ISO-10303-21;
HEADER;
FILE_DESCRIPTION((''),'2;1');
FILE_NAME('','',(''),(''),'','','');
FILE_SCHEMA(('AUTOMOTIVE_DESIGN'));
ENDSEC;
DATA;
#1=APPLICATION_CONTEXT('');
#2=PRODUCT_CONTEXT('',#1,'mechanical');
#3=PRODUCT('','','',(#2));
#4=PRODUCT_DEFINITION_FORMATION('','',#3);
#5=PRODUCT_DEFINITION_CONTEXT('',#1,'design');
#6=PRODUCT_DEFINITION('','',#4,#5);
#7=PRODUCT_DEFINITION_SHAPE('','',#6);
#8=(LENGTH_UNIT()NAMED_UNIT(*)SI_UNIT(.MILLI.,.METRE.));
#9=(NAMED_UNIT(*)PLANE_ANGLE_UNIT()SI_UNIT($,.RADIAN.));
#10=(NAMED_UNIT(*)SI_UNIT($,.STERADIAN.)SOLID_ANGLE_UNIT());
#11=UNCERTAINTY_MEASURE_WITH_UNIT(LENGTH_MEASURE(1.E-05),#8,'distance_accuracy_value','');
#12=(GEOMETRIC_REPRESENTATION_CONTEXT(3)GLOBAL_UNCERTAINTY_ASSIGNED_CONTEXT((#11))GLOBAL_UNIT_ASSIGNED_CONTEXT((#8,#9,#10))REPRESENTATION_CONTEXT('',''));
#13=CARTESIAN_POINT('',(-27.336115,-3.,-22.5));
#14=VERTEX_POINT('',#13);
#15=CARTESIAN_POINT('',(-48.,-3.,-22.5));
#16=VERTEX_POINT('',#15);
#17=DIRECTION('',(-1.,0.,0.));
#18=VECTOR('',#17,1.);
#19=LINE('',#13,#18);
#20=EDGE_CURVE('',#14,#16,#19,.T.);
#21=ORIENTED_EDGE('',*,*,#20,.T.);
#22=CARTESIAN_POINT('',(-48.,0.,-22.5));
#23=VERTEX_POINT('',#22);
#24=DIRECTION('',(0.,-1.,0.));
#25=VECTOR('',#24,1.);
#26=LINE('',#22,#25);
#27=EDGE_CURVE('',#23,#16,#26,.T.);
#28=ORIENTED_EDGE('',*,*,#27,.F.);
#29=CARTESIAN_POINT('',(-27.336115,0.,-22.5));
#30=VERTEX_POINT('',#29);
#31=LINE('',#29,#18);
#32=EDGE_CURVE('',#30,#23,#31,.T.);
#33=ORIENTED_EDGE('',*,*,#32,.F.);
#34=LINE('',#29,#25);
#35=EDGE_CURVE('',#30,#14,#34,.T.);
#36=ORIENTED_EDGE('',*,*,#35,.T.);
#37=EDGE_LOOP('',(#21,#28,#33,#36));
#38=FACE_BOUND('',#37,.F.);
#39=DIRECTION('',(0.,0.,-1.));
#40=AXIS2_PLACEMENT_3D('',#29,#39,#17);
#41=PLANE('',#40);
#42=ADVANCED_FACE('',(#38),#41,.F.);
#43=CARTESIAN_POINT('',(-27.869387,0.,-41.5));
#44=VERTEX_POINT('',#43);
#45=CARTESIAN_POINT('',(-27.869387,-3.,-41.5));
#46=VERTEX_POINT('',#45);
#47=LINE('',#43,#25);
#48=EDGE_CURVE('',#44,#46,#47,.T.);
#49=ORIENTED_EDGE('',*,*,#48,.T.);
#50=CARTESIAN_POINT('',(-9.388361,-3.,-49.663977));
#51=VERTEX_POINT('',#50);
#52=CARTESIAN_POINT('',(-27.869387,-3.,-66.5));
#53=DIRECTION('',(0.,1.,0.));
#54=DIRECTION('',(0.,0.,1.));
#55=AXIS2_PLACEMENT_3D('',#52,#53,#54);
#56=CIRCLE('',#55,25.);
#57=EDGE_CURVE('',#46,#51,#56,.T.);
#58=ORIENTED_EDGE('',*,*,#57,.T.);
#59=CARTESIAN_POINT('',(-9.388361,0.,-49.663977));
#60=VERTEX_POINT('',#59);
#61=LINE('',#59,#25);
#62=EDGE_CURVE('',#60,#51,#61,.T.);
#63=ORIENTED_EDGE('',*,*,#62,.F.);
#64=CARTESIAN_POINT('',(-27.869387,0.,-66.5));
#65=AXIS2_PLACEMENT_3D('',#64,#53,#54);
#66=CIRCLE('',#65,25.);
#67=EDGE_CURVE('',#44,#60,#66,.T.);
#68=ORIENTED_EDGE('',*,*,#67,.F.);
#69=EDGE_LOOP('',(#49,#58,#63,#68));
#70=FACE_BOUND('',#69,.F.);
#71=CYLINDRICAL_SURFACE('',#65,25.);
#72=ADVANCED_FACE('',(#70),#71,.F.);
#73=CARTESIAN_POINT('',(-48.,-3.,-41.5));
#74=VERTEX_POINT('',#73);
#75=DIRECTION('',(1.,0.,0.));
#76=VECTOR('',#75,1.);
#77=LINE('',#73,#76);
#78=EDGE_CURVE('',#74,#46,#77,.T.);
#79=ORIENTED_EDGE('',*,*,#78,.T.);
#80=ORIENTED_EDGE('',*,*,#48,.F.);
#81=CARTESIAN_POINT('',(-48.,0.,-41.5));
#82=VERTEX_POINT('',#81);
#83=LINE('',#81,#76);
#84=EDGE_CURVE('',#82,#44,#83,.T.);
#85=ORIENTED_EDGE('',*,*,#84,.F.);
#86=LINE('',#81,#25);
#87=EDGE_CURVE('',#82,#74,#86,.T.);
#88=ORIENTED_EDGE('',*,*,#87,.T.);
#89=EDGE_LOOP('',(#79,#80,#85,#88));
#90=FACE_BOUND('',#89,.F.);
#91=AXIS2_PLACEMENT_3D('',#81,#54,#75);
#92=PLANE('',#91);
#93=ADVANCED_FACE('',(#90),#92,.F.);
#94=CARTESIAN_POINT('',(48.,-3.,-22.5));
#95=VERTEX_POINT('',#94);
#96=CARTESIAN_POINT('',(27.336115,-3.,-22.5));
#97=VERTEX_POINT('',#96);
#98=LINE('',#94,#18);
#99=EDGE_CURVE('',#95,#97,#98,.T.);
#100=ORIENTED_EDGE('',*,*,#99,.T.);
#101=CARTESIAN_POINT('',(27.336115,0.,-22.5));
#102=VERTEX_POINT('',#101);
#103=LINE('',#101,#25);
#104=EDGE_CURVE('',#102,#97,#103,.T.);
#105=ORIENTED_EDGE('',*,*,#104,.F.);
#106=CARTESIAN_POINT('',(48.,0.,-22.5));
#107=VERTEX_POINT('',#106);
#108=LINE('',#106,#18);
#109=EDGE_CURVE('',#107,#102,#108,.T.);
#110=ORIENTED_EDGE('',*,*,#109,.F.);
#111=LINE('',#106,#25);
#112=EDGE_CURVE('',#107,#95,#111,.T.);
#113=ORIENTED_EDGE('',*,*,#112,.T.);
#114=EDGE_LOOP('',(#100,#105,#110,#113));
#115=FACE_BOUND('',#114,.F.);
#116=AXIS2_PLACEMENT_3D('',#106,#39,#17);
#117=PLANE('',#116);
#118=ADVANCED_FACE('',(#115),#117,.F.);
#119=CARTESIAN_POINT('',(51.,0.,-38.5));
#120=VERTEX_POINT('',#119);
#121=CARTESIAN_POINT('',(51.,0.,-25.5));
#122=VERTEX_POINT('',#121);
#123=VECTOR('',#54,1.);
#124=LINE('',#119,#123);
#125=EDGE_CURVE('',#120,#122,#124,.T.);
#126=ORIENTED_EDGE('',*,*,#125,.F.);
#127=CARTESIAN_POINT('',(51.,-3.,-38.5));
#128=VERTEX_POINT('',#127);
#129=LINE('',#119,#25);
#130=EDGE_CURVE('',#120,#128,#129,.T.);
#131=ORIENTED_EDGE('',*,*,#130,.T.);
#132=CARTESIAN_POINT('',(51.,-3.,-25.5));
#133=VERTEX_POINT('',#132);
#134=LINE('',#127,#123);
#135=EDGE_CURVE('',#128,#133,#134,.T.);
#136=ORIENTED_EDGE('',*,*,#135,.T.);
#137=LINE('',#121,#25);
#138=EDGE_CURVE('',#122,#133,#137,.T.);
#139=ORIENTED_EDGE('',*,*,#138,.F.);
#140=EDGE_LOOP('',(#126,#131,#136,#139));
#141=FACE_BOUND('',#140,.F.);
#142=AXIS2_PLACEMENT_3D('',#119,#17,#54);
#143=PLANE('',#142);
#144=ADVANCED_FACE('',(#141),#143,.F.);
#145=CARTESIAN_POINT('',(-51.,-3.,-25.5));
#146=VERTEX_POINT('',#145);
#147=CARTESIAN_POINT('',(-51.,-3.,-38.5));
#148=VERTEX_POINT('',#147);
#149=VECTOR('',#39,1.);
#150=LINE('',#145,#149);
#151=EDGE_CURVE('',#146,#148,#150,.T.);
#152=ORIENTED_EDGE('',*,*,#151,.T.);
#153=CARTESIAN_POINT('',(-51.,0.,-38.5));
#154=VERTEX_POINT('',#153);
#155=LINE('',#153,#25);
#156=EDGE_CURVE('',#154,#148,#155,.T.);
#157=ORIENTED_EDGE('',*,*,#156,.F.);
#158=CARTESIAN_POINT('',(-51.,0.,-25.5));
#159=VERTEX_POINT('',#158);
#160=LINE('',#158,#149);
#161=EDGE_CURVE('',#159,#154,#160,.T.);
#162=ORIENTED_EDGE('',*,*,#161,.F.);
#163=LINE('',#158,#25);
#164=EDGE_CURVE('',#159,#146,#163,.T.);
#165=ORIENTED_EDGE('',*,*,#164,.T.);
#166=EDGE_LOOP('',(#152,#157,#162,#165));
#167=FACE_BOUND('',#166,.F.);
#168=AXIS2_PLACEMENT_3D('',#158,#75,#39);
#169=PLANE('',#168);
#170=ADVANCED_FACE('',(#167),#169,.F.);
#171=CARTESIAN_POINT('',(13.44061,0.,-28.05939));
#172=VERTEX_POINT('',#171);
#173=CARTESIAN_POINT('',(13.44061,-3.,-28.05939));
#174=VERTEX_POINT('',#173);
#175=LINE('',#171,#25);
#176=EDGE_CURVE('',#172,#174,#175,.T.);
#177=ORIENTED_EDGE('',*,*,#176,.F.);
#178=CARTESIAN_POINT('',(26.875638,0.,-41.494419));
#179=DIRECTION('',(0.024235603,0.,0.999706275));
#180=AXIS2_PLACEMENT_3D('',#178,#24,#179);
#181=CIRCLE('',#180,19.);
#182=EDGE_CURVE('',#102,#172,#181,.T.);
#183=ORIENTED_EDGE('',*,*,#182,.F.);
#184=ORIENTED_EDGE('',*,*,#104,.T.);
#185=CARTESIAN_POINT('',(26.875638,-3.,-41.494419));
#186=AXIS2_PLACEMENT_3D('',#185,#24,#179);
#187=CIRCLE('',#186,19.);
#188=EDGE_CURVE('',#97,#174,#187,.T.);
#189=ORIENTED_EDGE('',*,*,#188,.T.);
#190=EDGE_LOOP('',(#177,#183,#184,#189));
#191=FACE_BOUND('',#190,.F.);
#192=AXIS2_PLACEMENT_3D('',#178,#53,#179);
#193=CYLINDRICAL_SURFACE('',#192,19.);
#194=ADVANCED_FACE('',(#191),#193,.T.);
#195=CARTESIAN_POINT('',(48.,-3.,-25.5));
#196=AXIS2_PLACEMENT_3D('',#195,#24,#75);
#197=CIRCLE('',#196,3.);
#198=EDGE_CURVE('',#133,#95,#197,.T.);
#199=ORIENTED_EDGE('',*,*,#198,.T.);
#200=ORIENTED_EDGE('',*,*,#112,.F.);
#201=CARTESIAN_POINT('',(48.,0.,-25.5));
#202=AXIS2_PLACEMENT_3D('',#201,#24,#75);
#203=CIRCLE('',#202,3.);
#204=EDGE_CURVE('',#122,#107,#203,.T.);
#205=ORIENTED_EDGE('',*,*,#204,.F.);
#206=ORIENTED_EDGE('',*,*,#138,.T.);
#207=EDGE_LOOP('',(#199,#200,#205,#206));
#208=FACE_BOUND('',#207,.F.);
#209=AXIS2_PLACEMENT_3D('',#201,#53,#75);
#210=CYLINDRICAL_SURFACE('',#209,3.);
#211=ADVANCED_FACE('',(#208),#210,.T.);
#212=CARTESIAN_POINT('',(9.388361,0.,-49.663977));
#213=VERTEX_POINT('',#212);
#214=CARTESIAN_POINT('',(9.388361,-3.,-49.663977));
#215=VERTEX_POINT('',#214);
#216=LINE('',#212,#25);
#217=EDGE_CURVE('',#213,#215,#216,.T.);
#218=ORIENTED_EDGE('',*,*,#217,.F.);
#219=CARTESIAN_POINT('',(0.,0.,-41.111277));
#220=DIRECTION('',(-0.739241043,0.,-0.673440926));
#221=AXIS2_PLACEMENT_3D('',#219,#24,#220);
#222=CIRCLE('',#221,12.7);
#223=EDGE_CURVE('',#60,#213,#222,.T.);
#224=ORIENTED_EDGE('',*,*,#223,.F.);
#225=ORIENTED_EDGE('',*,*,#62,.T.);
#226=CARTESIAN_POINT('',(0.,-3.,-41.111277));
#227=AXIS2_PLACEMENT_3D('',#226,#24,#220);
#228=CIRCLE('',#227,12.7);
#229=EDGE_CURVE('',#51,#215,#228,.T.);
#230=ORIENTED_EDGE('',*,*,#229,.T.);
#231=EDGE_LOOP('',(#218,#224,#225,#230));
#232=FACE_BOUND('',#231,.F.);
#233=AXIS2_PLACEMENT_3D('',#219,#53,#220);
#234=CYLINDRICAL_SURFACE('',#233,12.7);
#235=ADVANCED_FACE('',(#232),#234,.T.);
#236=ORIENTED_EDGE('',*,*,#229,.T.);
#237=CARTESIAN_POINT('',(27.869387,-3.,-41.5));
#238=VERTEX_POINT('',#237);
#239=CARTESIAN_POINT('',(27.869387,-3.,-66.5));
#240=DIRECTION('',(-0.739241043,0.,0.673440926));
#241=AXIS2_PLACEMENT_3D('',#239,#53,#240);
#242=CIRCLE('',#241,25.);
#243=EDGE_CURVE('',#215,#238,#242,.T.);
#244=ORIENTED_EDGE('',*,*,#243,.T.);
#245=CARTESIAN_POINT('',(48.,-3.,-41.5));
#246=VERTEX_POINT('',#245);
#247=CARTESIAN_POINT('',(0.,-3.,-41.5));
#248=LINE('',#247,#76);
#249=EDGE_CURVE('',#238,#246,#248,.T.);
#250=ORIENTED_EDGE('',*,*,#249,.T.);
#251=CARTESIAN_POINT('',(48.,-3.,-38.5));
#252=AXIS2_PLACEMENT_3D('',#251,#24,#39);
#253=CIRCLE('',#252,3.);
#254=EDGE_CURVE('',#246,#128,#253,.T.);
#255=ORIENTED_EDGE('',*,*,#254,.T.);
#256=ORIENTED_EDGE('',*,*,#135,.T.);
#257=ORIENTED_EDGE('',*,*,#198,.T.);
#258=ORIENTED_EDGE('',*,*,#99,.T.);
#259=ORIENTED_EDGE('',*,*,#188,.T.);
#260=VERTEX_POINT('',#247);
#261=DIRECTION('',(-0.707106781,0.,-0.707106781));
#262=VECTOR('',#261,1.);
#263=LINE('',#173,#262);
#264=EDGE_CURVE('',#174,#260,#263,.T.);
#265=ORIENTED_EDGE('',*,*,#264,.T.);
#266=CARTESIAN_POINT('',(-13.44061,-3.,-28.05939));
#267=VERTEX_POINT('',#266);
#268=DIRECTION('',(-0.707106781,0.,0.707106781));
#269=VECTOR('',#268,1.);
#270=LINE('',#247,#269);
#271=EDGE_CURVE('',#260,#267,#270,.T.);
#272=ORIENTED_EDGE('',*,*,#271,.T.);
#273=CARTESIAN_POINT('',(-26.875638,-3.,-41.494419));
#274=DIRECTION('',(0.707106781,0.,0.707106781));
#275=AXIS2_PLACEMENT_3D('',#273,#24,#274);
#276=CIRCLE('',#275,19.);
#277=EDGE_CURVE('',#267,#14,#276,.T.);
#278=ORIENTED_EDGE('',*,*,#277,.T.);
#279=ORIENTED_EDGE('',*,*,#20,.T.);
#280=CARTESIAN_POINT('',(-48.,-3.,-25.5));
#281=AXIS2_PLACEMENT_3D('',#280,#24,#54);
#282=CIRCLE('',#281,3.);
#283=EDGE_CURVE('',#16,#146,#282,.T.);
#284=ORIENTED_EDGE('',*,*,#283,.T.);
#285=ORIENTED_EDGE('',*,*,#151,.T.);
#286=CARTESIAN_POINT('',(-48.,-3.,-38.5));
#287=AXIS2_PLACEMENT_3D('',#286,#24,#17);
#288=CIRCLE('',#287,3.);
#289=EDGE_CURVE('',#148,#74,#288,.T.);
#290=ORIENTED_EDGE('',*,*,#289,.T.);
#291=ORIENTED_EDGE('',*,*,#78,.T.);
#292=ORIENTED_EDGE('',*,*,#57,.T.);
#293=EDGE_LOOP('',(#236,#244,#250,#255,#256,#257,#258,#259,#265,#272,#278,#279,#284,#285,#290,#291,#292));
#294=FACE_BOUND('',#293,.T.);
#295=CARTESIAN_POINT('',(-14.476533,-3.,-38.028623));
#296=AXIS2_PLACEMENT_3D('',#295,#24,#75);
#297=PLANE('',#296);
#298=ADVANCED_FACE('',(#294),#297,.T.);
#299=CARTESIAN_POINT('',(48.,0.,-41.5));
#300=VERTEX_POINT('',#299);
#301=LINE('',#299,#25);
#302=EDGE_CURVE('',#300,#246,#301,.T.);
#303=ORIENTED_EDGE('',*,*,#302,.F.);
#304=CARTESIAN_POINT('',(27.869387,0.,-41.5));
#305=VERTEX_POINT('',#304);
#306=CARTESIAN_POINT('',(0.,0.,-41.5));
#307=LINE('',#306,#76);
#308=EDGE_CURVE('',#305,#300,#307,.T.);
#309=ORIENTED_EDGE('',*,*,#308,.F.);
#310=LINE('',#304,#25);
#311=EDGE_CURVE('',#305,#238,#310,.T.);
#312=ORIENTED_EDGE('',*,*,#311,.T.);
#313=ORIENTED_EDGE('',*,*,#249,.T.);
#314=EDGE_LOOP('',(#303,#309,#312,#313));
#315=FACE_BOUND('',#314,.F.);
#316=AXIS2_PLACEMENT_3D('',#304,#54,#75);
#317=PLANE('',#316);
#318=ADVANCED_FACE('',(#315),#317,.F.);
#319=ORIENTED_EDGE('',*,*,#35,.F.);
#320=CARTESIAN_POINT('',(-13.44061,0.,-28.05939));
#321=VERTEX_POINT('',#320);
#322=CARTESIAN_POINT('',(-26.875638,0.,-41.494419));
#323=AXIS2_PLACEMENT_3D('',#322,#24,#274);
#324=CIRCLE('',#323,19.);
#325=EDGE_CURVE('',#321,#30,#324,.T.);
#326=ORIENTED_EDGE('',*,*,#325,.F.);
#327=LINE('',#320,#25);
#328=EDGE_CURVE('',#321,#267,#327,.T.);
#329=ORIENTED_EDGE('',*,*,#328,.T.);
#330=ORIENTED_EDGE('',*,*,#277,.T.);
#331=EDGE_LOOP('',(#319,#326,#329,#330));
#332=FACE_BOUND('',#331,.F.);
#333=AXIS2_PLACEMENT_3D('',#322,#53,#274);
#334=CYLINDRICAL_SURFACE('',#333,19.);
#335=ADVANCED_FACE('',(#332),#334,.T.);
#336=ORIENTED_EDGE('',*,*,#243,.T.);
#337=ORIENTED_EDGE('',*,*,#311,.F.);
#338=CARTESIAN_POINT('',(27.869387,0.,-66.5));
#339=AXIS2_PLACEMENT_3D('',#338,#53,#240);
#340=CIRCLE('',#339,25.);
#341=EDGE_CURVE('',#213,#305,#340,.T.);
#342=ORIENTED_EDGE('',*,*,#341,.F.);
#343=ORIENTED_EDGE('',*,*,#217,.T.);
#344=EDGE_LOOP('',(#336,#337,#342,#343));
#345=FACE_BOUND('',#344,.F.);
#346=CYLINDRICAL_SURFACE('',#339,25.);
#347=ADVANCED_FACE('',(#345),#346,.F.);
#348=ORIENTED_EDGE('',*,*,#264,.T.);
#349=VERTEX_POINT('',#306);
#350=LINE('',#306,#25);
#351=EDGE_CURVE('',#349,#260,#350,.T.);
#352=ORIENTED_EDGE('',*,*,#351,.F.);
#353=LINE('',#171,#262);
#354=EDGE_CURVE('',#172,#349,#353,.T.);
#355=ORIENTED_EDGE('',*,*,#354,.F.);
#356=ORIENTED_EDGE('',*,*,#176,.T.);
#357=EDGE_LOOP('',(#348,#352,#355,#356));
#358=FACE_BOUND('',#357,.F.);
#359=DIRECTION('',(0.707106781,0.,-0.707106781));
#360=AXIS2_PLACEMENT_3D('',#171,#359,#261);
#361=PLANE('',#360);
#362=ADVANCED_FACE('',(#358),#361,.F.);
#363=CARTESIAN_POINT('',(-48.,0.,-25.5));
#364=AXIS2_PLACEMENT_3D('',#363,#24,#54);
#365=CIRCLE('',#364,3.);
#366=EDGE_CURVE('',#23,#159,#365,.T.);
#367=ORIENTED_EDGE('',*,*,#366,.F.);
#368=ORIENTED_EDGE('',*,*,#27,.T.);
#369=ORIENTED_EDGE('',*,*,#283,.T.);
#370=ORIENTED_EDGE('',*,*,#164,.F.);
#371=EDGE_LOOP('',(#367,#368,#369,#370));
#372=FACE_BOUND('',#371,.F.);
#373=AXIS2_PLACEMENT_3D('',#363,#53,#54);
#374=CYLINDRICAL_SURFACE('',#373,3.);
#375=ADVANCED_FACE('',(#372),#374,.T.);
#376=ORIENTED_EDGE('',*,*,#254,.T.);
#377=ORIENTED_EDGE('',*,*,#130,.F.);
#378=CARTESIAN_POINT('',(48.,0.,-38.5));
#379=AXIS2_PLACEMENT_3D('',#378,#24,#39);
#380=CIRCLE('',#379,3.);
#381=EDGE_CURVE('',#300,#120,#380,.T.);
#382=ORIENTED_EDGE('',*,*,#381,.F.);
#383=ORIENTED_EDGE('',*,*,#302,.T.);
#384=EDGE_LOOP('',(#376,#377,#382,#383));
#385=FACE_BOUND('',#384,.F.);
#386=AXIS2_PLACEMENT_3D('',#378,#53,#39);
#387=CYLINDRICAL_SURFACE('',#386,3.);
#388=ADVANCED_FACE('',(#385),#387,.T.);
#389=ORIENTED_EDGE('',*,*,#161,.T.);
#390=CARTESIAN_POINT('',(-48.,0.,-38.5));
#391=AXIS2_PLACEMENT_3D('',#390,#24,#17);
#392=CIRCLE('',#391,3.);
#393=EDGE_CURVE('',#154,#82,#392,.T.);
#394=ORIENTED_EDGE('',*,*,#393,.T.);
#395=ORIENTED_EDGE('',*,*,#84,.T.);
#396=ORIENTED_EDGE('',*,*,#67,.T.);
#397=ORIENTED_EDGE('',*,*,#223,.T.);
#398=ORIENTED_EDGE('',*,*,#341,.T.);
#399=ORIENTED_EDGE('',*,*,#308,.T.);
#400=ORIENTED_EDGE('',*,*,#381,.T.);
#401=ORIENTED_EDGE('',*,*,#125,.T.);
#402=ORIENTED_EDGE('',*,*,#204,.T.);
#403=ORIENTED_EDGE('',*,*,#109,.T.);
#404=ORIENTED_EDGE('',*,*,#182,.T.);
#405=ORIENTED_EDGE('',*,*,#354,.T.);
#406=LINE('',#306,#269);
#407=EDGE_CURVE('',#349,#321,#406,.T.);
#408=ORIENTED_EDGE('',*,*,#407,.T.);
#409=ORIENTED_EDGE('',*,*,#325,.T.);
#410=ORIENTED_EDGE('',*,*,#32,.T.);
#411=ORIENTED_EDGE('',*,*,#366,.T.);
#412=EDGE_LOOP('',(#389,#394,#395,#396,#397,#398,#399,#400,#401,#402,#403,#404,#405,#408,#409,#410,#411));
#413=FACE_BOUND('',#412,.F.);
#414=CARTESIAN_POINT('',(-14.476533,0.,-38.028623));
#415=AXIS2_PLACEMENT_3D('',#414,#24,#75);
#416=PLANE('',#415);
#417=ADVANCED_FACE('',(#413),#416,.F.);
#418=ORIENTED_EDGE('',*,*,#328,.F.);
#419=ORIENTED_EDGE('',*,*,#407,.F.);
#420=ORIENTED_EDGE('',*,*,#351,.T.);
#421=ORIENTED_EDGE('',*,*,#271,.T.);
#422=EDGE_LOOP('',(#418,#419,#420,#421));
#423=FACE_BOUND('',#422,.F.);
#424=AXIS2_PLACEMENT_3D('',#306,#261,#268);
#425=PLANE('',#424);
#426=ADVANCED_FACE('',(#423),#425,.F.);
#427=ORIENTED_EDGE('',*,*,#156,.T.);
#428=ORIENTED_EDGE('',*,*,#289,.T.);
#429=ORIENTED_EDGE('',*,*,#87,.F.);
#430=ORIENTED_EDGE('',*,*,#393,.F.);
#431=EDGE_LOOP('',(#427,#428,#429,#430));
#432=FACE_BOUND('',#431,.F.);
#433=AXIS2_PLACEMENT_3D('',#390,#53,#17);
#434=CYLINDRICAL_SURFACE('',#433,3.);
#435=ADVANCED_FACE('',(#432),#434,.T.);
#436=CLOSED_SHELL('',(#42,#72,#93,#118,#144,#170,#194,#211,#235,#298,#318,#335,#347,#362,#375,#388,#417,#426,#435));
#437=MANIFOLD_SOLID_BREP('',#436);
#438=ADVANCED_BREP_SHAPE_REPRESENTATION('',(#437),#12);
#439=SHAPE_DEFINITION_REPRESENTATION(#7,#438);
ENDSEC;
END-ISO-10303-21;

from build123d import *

# Parameters (mm, degrees)
F1_DEPTH = 3


# Not quite as in the source:
# - a feature of the source that left no trace in its solid (it failed there, or was rolled back) is left out


with BuildPart() as f1:
    # F0 (on Front) → F1 (new body)
    with BuildSketch(Plane.XZ):
        with BuildLine():
            ThreePointArc((-48, -22.5), (-50.1213203436, -23.3786796564), (-51, -25.5))
            Line((-51, -25.5), (-51, -38.5))
            ThreePointArc((-51, -38.5), (-50.1213203436, -40.6213203436), (-48, -41.5))
            Line((-48, -41.5), (-27.8693873068, -41.5))
            ThreePointArc((-27.8693873068, -41.5), (-17.7674216266, -43.6318936202), (-9.3883612413, -49.6639768483))
            ThreePointArc((-9.3883612413, -49.6639768483), (0, -53.8112770872), (9.3883612413, -49.6639768483))
            ThreePointArc((9.3883612413, -49.6639768483), (17.7674216266, -43.6318936202), (27.8693873068, -41.5))
            Line((27.8693873068, -41.5), (0, -41.5))
            Line((0, -41.5), (-13.4406096243, -28.0593903757))
            ThreePointArc((-13.4406096243, -28.0593903757), (-19.8179151952, -23.8538823154), (-27.3361149175, -22.5))
            Line((-27.3361149175, -22.5), (-48, -22.5))
        make_face()
        with BuildLine():
            Line((13.4406096243, -28.0593903757), (0, -41.5))
            Line((0, -41.5), (27.8693873068, -41.5))
            Line((27.8693873068, -41.5), (48, -41.5))
            ThreePointArc((48, -41.5), (50.1213203436, -40.6213203436), (51, -38.5))
            Line((51, -38.5), (51, -25.5))
            ThreePointArc((51, -25.5), (50.1213203436, -23.3786796564), (48, -22.5))
            Line((48, -22.5), (27.3361149175, -22.5))
            ThreePointArc((27.3361149175, -22.5), (19.8179151952, -23.8538823154), (13.4406096243, -28.0593903757))
        make_face()
    extrude(amount=F1_DEPTH)


solid = f1.part
